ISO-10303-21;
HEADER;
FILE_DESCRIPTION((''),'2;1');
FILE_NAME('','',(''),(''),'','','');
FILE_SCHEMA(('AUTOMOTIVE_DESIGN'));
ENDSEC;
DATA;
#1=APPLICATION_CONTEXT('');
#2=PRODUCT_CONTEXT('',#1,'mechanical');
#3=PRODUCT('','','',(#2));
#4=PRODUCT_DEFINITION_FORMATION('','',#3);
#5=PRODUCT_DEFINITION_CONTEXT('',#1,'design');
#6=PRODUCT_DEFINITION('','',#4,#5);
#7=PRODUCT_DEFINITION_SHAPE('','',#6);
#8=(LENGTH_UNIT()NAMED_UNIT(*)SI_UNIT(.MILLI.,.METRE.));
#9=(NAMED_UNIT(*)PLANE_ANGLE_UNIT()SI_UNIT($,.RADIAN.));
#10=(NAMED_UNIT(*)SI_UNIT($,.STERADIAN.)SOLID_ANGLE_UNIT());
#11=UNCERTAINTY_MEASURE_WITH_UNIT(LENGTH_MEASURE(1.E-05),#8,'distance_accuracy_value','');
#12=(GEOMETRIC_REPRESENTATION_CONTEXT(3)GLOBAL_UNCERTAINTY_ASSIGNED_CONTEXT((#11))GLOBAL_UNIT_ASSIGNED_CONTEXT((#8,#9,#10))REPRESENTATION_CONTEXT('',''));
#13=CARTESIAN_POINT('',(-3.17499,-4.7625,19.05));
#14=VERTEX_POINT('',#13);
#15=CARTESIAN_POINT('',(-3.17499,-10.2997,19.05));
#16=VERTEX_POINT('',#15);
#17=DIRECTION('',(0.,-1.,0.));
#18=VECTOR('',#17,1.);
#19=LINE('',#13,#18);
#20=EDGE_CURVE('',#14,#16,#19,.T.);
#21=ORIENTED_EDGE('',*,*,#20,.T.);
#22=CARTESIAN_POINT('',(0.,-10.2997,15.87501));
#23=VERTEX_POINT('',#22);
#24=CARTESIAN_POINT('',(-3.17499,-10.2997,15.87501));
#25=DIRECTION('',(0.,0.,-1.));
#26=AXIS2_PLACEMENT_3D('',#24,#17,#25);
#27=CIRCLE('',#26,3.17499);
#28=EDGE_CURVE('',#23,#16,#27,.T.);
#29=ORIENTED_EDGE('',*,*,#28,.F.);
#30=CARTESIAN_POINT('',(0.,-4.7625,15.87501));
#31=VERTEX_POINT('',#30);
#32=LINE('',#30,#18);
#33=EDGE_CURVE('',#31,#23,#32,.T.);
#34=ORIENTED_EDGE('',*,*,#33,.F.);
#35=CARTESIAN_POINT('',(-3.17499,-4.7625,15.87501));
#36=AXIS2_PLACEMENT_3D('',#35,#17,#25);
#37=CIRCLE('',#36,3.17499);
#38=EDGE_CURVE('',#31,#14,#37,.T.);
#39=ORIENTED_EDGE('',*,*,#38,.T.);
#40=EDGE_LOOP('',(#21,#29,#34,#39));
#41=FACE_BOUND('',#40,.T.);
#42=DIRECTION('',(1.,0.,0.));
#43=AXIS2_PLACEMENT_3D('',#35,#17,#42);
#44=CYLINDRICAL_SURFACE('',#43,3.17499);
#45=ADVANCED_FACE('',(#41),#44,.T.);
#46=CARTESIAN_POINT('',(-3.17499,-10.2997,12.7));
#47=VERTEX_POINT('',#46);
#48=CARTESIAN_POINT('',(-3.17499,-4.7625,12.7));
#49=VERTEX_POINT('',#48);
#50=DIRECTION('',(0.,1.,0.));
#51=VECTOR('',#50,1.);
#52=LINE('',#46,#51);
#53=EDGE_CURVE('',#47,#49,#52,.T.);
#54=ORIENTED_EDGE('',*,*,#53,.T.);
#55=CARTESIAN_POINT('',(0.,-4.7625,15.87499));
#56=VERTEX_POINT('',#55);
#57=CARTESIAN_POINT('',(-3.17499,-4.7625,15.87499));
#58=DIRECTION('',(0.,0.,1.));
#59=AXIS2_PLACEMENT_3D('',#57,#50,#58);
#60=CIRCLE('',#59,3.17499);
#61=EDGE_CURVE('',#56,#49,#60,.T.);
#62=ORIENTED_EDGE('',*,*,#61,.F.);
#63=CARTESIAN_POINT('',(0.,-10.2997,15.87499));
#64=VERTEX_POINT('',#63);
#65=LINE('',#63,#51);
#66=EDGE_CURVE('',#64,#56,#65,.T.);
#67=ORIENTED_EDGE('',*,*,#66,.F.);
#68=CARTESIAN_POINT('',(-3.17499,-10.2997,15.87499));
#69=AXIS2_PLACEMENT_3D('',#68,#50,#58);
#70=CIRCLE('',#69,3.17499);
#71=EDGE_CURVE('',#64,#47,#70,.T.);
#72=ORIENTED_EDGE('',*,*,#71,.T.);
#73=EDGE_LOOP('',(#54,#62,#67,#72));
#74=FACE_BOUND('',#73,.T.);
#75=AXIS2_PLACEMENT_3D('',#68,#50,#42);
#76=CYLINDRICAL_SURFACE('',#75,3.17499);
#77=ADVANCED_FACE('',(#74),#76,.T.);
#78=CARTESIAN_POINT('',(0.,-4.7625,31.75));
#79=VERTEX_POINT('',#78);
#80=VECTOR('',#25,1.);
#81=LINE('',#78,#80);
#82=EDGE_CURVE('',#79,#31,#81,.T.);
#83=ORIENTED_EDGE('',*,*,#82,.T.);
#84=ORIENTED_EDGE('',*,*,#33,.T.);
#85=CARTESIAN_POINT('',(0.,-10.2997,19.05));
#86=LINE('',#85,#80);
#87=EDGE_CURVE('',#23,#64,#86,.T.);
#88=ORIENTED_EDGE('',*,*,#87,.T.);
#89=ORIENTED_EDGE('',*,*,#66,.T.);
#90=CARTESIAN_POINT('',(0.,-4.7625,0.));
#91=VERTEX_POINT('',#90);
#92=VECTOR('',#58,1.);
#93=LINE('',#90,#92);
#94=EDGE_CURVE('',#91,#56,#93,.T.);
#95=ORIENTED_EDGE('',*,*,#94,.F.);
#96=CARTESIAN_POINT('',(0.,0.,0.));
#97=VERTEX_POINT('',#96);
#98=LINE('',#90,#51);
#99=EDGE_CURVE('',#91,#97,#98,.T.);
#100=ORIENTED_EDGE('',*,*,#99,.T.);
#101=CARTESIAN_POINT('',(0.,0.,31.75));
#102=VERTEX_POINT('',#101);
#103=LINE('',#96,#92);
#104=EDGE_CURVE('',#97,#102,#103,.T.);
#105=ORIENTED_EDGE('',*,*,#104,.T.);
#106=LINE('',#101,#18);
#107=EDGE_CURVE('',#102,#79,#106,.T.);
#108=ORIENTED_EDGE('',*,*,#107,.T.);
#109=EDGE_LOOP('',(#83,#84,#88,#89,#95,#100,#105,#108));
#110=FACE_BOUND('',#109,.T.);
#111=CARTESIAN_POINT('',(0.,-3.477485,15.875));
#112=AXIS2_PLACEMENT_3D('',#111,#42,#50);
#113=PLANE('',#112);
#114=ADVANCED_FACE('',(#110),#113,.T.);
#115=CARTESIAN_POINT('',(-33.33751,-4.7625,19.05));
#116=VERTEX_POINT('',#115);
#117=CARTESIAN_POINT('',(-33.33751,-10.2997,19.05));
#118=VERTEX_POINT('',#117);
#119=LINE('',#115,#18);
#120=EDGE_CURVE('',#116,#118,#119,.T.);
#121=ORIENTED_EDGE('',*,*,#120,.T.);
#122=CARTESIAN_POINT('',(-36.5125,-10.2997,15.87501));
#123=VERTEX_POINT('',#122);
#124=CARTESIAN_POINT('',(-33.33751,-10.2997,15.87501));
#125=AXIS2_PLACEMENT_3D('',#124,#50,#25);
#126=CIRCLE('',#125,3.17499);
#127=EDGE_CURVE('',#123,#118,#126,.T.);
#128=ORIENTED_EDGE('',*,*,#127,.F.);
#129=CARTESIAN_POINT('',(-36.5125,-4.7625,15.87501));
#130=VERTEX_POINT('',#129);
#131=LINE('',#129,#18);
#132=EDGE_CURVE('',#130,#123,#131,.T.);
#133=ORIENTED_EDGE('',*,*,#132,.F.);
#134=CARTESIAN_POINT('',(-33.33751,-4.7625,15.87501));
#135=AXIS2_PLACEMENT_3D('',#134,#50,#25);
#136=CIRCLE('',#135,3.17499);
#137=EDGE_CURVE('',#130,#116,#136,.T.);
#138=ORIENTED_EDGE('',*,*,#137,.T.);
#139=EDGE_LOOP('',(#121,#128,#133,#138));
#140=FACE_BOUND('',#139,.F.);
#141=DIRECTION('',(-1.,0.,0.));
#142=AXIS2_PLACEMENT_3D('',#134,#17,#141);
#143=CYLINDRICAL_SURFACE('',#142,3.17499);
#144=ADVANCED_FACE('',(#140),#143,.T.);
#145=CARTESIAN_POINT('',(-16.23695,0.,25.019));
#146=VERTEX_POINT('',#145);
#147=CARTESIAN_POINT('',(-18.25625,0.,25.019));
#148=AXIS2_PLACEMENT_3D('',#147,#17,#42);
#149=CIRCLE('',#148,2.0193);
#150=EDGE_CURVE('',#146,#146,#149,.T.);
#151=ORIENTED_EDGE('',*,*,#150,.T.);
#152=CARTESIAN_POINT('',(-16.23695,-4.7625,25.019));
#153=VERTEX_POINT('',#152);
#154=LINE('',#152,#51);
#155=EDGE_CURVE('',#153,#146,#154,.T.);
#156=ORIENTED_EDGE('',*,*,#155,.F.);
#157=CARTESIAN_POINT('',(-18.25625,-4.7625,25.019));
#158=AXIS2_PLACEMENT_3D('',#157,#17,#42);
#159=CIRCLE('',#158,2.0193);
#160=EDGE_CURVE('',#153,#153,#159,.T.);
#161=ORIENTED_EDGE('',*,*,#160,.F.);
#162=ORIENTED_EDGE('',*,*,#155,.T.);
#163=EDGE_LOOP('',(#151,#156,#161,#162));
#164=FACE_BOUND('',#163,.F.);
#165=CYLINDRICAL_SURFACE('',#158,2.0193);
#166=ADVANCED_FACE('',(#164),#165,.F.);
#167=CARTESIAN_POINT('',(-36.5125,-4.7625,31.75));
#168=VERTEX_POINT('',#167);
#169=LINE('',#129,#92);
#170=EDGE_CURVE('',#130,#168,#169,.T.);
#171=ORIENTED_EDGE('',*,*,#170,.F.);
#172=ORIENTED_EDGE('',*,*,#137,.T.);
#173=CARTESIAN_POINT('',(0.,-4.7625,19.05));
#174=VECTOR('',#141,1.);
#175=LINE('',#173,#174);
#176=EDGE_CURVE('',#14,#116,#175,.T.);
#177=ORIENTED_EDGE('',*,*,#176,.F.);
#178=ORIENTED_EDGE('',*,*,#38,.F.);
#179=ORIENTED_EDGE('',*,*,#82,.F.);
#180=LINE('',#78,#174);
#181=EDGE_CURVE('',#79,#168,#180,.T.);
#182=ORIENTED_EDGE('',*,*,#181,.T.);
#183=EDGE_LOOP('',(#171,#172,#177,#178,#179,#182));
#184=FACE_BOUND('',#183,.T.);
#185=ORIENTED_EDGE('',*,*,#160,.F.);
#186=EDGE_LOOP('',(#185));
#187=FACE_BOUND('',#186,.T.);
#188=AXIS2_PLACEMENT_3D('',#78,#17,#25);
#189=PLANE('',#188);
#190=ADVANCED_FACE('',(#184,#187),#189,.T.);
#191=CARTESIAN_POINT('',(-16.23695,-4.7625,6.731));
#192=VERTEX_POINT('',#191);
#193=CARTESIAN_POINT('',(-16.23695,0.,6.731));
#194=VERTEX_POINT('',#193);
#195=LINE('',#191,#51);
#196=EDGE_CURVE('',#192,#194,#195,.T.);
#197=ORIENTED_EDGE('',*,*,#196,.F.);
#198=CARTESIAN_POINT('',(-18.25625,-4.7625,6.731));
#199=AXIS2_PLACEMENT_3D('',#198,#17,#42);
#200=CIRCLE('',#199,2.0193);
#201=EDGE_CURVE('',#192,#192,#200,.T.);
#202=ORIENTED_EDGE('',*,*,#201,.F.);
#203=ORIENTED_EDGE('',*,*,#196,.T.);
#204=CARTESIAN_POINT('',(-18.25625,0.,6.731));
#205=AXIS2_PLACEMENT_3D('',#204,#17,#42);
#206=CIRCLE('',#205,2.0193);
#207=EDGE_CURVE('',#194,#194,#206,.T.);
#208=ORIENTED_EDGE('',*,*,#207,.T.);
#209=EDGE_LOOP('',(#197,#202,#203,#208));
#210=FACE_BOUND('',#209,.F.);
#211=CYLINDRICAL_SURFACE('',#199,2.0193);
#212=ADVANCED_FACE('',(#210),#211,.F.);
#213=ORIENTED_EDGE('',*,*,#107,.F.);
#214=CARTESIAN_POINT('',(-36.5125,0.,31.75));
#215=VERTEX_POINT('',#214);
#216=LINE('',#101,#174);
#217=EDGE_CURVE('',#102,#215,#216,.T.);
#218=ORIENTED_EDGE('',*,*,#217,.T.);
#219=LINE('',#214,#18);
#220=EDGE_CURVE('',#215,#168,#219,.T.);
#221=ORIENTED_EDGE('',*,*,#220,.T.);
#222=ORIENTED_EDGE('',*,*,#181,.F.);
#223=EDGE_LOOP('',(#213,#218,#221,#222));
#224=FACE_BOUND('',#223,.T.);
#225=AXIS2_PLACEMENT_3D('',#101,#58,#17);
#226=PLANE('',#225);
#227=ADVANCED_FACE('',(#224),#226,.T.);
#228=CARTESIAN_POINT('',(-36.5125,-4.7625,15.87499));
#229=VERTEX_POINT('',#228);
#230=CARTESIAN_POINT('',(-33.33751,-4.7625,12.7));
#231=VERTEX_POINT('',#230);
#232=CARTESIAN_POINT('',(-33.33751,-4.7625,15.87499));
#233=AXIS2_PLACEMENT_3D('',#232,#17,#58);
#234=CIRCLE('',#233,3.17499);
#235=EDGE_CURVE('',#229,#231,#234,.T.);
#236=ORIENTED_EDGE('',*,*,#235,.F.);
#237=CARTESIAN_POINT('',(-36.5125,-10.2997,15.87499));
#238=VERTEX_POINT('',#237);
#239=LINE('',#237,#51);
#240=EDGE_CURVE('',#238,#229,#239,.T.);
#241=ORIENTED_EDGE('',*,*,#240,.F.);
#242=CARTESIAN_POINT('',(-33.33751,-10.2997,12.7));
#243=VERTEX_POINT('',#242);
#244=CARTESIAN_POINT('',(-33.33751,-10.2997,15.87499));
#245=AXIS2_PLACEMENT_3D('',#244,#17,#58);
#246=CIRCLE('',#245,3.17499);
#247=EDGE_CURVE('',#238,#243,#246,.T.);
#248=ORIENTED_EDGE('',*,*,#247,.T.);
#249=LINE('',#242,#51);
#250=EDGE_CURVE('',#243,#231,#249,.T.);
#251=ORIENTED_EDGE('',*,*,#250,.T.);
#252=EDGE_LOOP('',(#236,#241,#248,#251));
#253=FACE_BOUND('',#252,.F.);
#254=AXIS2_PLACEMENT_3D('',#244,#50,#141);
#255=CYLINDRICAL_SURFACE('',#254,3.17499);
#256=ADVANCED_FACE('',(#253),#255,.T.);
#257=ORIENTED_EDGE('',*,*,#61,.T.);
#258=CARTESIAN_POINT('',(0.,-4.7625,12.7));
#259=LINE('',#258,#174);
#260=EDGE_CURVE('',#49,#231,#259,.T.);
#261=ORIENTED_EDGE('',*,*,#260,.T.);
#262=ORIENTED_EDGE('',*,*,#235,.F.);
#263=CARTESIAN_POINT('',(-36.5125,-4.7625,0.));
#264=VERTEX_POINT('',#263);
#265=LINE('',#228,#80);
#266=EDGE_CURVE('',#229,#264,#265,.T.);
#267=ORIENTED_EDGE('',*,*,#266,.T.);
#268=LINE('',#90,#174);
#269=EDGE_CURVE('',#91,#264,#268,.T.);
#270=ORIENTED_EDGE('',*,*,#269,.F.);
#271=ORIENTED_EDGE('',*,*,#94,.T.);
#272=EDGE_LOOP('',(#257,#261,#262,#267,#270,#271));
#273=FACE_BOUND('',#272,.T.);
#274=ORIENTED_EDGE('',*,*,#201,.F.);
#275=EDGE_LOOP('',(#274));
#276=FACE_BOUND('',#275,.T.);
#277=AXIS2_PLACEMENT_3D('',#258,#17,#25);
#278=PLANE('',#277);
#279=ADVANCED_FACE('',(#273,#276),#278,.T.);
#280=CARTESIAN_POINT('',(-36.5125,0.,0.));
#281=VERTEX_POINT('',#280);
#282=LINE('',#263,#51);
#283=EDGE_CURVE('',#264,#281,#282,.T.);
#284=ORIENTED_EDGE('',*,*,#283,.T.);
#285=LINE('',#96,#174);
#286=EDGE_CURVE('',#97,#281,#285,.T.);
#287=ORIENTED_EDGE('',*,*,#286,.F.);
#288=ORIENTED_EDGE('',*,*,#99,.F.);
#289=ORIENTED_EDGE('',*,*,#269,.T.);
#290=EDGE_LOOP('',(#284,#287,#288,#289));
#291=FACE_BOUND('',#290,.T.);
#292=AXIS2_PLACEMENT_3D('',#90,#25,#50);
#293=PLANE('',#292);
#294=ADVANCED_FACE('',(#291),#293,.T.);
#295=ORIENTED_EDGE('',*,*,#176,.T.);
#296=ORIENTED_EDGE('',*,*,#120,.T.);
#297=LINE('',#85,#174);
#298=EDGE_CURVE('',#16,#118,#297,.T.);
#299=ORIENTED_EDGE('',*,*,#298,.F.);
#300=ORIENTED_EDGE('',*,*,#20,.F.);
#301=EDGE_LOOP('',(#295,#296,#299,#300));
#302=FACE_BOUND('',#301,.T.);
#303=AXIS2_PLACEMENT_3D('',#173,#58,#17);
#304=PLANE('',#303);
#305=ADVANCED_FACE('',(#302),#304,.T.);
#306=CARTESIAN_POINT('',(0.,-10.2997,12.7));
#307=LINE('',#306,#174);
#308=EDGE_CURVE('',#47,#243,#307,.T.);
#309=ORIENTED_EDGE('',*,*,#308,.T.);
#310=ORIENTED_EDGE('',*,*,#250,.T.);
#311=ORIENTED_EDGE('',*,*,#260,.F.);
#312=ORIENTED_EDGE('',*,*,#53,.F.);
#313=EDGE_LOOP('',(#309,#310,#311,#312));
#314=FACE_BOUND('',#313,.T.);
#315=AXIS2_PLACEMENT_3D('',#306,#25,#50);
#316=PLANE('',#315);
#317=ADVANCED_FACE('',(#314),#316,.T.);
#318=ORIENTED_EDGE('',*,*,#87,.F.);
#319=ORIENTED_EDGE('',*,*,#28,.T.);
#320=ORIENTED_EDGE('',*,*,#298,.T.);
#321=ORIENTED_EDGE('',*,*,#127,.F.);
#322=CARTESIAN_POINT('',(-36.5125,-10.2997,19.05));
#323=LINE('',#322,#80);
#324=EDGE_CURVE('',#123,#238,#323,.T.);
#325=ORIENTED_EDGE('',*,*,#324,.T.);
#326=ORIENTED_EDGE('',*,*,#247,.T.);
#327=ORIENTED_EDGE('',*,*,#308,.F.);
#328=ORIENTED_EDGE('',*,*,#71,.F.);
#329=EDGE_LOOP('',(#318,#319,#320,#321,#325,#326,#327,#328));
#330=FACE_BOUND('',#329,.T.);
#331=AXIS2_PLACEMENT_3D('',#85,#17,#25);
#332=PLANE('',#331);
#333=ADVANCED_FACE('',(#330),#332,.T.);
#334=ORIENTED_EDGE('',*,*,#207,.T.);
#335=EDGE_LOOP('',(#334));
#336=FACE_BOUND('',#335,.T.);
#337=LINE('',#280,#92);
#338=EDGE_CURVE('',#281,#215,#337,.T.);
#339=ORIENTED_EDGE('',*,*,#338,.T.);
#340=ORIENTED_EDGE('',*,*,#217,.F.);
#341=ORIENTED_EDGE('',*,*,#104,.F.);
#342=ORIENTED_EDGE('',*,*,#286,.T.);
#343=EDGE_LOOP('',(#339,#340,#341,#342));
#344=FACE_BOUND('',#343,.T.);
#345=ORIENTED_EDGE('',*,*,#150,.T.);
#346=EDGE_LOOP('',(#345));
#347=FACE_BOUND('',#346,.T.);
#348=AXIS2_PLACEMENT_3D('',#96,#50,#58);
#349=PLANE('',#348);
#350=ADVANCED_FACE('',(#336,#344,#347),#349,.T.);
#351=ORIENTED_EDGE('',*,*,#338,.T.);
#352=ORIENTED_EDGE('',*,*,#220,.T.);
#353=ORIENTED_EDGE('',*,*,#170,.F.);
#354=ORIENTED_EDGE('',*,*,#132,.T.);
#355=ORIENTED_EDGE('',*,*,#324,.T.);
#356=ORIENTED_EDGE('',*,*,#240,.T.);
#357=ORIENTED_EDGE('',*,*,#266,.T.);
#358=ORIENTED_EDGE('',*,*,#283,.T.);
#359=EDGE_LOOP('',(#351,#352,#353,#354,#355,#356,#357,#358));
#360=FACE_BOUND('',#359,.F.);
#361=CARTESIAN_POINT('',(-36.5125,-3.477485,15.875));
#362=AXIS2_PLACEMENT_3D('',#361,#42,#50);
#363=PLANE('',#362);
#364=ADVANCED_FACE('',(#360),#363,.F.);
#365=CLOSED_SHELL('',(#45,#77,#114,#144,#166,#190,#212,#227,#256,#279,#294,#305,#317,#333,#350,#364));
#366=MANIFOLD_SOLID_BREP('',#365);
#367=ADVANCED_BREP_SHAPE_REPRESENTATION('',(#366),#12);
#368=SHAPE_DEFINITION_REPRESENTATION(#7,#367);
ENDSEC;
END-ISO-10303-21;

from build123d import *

# Parameters (mm, degrees)
F1_DEPTH = 36.5125
F2_R     = 2.0193
F3_DEPTH = 4.7625
F4_R     = 3.17499


# Not quite as in the source:
# - a fillet or chamfer is up to 0.001 mm smaller than in the source, because OpenCascade refuses the exact size


with BuildPart() as f1:
    # F0 (on Right) → F1 (new body)
    with BuildSketch(Plane.YZ):
        Polygon((-4.7625, 0), (0, 0), (0, 31.75), (-4.7625, 31.75), (-4.7625, 19.05), (-10.2997, 19.05), (-10.2997, 12.7), (-4.7625, 12.7), align=None)
    extrude(amount=-F1_DEPTH)

    # F2 (on face) → F3 (cut, through all)
    with BuildSketch(Plane.XZ.offset(4.7625)):
        with Locations((-18.25625, 25.019)):
            Circle(F2_R)
        with Locations((-18.25625, 6.731)):
            Circle(F2_R)
    extrude(amount=-F3_DEPTH, mode=Mode.SUBTRACT)

    # F4 (radius 3.175 in the source; OpenCascade refuses exactly that, so slightly less here)
    f4_edges = [f1.edges().sort_by_distance(p)[0] for p in [
        (0, -7.5311, 19.05),
        (0, -7.5311, 12.7),
        (-36.5125, -7.5311, 12.7),
        (-36.5125, -7.5311, 19.05),
    ]]
    fillet(f4_edges, radius=F4_R)


solid = f1.part
